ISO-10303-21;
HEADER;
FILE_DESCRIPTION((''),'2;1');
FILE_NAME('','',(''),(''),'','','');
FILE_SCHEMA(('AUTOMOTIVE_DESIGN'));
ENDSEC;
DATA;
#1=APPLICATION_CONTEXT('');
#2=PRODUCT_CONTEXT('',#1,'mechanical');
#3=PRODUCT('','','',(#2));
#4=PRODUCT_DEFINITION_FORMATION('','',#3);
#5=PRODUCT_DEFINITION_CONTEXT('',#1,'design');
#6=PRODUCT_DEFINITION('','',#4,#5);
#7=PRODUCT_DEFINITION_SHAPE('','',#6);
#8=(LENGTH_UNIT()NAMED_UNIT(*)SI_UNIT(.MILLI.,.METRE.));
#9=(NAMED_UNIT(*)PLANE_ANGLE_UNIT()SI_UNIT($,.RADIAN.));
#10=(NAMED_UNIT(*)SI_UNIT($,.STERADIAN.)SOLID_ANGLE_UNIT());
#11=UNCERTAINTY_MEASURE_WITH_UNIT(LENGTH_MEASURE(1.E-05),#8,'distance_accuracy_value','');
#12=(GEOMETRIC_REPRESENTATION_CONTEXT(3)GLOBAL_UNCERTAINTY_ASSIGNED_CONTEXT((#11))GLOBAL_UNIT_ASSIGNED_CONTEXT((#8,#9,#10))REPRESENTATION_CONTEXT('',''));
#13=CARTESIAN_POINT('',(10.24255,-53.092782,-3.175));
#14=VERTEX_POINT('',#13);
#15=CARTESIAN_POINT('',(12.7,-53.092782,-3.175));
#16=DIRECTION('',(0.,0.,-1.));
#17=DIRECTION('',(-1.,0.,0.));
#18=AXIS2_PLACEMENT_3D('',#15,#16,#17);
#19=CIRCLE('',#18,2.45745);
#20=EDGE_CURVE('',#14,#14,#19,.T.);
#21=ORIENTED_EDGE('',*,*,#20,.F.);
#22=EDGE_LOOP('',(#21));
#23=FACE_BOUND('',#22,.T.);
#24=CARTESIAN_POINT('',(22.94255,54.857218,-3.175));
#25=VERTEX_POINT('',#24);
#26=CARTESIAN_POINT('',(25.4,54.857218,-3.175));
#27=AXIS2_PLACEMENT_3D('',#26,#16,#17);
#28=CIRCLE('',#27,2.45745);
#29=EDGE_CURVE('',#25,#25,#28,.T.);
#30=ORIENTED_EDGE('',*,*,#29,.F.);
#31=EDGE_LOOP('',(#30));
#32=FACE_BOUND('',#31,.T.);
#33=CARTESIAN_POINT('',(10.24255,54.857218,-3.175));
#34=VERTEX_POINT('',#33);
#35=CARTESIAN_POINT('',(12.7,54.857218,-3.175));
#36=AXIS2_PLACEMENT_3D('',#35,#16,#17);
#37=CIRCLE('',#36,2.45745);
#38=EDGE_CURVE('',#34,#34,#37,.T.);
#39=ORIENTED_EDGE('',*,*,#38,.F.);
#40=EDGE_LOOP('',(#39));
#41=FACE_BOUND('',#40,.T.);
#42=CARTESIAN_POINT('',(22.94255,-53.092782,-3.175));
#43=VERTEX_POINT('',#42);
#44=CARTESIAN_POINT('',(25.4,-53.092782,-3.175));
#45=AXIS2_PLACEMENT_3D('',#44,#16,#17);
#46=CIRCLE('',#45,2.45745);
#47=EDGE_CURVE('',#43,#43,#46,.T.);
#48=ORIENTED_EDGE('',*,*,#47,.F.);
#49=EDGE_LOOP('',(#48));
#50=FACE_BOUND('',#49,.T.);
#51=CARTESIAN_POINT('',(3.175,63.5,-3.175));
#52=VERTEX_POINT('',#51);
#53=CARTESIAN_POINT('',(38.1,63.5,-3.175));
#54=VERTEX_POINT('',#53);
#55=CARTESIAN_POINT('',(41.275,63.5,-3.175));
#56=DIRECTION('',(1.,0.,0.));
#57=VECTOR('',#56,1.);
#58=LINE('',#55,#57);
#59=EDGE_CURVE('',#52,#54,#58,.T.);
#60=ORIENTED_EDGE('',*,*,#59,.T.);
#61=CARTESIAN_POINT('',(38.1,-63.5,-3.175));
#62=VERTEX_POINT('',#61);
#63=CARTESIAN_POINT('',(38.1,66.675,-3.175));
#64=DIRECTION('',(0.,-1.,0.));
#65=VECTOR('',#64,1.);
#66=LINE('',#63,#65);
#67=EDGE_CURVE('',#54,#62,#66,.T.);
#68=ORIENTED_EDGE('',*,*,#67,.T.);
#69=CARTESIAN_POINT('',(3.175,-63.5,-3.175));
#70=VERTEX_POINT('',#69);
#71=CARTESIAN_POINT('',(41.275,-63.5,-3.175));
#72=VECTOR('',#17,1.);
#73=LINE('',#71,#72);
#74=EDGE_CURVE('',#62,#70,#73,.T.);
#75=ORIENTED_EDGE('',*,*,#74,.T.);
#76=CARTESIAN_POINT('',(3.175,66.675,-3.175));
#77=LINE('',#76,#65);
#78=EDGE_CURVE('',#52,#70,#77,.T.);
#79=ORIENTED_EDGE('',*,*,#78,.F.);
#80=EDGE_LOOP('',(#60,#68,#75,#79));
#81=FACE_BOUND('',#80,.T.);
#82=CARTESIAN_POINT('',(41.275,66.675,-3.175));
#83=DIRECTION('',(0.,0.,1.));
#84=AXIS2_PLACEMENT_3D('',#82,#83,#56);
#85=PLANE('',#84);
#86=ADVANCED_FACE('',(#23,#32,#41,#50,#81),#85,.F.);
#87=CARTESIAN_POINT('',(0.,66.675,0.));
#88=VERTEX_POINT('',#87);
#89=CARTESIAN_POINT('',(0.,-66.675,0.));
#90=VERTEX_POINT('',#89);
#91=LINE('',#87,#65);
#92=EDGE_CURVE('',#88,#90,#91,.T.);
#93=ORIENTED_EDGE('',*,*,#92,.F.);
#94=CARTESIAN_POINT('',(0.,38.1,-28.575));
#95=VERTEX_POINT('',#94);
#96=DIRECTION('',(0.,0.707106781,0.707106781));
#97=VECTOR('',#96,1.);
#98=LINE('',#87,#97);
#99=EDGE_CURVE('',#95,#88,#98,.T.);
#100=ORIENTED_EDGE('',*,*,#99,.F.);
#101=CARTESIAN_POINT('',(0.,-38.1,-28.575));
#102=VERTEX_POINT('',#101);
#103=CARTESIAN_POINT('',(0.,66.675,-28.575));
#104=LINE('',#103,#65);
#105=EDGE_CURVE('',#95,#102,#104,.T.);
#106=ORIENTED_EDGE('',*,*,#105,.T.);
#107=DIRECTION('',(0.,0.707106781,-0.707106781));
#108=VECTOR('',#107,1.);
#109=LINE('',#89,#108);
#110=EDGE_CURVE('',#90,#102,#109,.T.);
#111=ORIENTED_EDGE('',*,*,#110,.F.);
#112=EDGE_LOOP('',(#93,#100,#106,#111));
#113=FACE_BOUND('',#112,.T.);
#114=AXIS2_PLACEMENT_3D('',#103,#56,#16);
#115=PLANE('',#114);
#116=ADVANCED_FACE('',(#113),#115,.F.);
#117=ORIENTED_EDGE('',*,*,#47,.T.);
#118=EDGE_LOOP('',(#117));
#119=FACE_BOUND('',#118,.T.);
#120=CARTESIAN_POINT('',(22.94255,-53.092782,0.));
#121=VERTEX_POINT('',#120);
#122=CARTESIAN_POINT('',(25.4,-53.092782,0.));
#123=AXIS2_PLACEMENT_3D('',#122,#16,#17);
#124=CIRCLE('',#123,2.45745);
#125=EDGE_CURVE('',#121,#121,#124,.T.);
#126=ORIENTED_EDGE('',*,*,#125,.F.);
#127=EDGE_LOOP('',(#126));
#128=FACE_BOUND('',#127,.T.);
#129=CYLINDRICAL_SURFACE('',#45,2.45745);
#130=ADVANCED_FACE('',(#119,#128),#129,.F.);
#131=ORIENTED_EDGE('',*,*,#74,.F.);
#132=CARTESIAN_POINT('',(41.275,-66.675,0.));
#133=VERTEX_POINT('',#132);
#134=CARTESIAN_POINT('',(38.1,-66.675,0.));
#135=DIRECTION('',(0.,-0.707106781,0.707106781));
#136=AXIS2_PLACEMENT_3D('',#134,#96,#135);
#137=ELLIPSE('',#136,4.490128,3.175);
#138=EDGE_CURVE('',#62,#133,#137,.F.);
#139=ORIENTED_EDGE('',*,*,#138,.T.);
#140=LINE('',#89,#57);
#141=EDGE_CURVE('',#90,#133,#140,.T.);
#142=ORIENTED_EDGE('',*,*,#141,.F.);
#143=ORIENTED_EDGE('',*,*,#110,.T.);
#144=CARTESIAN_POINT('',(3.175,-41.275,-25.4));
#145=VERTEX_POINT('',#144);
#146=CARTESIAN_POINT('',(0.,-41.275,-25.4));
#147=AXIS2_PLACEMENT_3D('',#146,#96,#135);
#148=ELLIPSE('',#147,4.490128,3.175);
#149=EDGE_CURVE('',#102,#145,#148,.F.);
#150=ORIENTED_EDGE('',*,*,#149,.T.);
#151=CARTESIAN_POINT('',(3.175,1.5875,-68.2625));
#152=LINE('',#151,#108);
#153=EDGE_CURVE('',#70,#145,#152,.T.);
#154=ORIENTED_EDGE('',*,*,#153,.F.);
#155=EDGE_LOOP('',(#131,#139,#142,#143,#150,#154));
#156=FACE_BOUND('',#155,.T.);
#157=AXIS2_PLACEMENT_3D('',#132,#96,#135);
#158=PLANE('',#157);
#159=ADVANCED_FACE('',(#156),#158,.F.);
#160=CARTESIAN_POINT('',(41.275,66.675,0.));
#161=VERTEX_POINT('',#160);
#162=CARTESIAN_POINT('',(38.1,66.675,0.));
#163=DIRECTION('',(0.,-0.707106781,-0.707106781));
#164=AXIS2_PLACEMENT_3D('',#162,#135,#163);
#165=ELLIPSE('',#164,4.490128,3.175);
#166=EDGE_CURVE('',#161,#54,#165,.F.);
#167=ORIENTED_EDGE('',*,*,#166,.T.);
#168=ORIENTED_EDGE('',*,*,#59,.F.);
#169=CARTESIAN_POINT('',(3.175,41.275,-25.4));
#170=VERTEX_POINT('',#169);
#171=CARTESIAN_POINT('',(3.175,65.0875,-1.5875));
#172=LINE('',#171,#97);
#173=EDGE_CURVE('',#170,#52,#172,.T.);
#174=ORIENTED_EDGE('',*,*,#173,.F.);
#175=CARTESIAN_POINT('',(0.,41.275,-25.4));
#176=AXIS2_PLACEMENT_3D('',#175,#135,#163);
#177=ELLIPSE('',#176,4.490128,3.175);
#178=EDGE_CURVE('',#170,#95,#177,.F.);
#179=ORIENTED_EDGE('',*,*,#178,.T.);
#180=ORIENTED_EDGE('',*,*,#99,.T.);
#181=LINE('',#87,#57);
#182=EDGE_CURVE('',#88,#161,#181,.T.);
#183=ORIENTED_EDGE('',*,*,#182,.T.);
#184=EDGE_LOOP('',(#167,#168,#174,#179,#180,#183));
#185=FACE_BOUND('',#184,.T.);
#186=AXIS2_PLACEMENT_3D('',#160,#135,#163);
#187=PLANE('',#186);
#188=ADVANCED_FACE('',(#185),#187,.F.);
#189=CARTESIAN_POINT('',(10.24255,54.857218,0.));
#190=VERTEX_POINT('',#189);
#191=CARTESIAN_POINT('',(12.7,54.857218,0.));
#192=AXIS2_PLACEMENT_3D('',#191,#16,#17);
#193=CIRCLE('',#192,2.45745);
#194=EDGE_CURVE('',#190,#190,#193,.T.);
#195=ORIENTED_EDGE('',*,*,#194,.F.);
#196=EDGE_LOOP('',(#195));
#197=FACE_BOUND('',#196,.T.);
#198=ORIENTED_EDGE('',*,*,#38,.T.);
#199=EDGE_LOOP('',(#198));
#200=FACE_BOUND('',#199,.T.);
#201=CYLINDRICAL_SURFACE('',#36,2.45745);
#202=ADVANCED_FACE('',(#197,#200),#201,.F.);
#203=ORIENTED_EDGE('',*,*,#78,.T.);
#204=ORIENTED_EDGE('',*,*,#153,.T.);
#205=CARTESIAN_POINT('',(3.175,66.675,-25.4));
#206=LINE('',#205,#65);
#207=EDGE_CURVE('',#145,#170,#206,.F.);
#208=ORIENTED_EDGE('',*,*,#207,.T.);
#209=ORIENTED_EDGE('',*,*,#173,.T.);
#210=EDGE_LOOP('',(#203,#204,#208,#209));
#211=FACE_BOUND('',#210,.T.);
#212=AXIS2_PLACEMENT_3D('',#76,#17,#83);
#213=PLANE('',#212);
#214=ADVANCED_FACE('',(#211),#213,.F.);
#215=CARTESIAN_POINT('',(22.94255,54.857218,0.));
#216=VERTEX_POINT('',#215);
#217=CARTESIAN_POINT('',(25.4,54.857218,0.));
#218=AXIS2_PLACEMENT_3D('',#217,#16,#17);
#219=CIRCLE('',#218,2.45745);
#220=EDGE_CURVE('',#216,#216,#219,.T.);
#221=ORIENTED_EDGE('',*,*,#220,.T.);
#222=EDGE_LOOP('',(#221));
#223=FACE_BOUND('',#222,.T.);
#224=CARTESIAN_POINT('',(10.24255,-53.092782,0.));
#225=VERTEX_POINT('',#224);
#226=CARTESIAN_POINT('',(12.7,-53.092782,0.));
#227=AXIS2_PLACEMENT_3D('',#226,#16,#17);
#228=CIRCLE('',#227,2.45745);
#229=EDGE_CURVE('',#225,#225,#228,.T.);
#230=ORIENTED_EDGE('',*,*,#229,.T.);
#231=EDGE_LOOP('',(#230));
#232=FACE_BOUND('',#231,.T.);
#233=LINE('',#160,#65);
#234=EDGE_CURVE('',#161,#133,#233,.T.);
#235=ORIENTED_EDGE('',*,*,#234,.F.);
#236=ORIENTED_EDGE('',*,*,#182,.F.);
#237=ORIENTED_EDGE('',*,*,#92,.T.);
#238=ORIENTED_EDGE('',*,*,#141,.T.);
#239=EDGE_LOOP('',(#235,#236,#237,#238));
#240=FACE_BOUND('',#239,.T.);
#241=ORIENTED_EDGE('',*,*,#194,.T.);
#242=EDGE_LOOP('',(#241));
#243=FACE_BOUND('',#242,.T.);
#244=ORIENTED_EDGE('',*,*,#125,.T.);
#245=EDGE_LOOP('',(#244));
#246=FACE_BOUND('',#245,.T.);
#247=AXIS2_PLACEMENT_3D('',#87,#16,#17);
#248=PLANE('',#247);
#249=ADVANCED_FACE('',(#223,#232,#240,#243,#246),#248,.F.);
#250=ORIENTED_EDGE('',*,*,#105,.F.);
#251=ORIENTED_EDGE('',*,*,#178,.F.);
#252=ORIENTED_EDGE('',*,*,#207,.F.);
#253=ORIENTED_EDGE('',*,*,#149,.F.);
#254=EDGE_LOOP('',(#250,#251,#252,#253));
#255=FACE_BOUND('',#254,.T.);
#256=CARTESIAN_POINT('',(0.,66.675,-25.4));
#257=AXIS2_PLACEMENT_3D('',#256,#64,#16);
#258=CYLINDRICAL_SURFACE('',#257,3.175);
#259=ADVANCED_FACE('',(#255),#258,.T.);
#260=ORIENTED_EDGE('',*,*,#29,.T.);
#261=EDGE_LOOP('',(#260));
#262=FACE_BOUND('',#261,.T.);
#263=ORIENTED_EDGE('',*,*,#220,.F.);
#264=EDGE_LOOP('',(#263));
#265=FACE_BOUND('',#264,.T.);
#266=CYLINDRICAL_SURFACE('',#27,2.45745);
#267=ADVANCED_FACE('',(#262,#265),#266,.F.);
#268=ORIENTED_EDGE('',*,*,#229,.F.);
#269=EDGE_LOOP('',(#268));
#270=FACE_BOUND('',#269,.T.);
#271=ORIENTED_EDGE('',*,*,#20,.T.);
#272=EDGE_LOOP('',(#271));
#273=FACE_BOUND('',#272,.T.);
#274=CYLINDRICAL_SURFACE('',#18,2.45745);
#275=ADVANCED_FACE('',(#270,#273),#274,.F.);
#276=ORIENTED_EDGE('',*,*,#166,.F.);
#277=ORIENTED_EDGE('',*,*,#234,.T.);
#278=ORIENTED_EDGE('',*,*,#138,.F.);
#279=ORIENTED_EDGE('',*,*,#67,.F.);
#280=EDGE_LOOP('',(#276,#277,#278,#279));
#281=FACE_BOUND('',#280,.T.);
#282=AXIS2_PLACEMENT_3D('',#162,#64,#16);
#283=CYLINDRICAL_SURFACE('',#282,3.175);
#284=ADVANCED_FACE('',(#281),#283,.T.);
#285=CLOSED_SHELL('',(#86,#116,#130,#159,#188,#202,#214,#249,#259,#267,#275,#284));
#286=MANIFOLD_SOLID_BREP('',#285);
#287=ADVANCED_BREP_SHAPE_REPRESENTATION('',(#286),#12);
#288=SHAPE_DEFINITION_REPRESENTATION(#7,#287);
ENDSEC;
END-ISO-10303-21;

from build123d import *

# Parameters (mm, degrees)
BOSS_EXTRUDE1_DEPTH          = 66.675
FILLET1_R                    = 3.175
CUT_EXTRUDE1_DEPTH           = 84.460840368
F_10_0_1935_DIAMETER_HOLE1_D = 4.9149


with BuildPart() as part:
    # Sketch1 → Boss-Extrude1 (new, symmetric)
    with BuildSketch(Plane(origin=(0, 0, 0), x_dir=(1, 0, 0), z_dir=(0, 1, 0))):
        Polygon((0, 28.575), (0, 0), (41.275, 0), (41.275, 3.175), (3.175, 3.175), (3.175, 28.575), align=None)
    extrude(amount=BOSS_EXTRUDE1_DEPTH, both=True)

    # Fillet1
    fillet1_edges = [part.edges().sort_by_distance(p)[0] for p in [
        (41.275, 0, -3.175),
        (3.175, 0, -28.575),
    ]]
    fillet(fillet1_edges, radius=FILLET1_R - 0.0001)  # a hair under: the kernel refuses the full size

    # Sketch4 → Cut-Extrude1 (cut, through all)
    with BuildSketch(Plane.ZY):
        Polygon((0, -66.675), (-28.575, -38.1), (-28.575, -66.675), align=None)
        Polygon((0, 66.675), (-28.575, 38.1), (-28.575, 66.675), align=None)
    extrude(amount=-CUT_EXTRUDE1_DEPTH, mode=Mode.SUBTRACT)

    # #10 (0.1935) Diameter Hole1 (through all)
    with Locations(Plane(origin=(0, 0, -3.175), x_dir=(-1, 0, 0), z_dir=(0, 0, -1))):
        with Locations((-25.4, -53.092781609), (-12.7, -53.092781609), (-12.7, 54.857218391), (-25.4, 54.857218391)):
            Hole(F_10_0_1935_DIAMETER_HOLE1_D / 2)


solid = part.part
